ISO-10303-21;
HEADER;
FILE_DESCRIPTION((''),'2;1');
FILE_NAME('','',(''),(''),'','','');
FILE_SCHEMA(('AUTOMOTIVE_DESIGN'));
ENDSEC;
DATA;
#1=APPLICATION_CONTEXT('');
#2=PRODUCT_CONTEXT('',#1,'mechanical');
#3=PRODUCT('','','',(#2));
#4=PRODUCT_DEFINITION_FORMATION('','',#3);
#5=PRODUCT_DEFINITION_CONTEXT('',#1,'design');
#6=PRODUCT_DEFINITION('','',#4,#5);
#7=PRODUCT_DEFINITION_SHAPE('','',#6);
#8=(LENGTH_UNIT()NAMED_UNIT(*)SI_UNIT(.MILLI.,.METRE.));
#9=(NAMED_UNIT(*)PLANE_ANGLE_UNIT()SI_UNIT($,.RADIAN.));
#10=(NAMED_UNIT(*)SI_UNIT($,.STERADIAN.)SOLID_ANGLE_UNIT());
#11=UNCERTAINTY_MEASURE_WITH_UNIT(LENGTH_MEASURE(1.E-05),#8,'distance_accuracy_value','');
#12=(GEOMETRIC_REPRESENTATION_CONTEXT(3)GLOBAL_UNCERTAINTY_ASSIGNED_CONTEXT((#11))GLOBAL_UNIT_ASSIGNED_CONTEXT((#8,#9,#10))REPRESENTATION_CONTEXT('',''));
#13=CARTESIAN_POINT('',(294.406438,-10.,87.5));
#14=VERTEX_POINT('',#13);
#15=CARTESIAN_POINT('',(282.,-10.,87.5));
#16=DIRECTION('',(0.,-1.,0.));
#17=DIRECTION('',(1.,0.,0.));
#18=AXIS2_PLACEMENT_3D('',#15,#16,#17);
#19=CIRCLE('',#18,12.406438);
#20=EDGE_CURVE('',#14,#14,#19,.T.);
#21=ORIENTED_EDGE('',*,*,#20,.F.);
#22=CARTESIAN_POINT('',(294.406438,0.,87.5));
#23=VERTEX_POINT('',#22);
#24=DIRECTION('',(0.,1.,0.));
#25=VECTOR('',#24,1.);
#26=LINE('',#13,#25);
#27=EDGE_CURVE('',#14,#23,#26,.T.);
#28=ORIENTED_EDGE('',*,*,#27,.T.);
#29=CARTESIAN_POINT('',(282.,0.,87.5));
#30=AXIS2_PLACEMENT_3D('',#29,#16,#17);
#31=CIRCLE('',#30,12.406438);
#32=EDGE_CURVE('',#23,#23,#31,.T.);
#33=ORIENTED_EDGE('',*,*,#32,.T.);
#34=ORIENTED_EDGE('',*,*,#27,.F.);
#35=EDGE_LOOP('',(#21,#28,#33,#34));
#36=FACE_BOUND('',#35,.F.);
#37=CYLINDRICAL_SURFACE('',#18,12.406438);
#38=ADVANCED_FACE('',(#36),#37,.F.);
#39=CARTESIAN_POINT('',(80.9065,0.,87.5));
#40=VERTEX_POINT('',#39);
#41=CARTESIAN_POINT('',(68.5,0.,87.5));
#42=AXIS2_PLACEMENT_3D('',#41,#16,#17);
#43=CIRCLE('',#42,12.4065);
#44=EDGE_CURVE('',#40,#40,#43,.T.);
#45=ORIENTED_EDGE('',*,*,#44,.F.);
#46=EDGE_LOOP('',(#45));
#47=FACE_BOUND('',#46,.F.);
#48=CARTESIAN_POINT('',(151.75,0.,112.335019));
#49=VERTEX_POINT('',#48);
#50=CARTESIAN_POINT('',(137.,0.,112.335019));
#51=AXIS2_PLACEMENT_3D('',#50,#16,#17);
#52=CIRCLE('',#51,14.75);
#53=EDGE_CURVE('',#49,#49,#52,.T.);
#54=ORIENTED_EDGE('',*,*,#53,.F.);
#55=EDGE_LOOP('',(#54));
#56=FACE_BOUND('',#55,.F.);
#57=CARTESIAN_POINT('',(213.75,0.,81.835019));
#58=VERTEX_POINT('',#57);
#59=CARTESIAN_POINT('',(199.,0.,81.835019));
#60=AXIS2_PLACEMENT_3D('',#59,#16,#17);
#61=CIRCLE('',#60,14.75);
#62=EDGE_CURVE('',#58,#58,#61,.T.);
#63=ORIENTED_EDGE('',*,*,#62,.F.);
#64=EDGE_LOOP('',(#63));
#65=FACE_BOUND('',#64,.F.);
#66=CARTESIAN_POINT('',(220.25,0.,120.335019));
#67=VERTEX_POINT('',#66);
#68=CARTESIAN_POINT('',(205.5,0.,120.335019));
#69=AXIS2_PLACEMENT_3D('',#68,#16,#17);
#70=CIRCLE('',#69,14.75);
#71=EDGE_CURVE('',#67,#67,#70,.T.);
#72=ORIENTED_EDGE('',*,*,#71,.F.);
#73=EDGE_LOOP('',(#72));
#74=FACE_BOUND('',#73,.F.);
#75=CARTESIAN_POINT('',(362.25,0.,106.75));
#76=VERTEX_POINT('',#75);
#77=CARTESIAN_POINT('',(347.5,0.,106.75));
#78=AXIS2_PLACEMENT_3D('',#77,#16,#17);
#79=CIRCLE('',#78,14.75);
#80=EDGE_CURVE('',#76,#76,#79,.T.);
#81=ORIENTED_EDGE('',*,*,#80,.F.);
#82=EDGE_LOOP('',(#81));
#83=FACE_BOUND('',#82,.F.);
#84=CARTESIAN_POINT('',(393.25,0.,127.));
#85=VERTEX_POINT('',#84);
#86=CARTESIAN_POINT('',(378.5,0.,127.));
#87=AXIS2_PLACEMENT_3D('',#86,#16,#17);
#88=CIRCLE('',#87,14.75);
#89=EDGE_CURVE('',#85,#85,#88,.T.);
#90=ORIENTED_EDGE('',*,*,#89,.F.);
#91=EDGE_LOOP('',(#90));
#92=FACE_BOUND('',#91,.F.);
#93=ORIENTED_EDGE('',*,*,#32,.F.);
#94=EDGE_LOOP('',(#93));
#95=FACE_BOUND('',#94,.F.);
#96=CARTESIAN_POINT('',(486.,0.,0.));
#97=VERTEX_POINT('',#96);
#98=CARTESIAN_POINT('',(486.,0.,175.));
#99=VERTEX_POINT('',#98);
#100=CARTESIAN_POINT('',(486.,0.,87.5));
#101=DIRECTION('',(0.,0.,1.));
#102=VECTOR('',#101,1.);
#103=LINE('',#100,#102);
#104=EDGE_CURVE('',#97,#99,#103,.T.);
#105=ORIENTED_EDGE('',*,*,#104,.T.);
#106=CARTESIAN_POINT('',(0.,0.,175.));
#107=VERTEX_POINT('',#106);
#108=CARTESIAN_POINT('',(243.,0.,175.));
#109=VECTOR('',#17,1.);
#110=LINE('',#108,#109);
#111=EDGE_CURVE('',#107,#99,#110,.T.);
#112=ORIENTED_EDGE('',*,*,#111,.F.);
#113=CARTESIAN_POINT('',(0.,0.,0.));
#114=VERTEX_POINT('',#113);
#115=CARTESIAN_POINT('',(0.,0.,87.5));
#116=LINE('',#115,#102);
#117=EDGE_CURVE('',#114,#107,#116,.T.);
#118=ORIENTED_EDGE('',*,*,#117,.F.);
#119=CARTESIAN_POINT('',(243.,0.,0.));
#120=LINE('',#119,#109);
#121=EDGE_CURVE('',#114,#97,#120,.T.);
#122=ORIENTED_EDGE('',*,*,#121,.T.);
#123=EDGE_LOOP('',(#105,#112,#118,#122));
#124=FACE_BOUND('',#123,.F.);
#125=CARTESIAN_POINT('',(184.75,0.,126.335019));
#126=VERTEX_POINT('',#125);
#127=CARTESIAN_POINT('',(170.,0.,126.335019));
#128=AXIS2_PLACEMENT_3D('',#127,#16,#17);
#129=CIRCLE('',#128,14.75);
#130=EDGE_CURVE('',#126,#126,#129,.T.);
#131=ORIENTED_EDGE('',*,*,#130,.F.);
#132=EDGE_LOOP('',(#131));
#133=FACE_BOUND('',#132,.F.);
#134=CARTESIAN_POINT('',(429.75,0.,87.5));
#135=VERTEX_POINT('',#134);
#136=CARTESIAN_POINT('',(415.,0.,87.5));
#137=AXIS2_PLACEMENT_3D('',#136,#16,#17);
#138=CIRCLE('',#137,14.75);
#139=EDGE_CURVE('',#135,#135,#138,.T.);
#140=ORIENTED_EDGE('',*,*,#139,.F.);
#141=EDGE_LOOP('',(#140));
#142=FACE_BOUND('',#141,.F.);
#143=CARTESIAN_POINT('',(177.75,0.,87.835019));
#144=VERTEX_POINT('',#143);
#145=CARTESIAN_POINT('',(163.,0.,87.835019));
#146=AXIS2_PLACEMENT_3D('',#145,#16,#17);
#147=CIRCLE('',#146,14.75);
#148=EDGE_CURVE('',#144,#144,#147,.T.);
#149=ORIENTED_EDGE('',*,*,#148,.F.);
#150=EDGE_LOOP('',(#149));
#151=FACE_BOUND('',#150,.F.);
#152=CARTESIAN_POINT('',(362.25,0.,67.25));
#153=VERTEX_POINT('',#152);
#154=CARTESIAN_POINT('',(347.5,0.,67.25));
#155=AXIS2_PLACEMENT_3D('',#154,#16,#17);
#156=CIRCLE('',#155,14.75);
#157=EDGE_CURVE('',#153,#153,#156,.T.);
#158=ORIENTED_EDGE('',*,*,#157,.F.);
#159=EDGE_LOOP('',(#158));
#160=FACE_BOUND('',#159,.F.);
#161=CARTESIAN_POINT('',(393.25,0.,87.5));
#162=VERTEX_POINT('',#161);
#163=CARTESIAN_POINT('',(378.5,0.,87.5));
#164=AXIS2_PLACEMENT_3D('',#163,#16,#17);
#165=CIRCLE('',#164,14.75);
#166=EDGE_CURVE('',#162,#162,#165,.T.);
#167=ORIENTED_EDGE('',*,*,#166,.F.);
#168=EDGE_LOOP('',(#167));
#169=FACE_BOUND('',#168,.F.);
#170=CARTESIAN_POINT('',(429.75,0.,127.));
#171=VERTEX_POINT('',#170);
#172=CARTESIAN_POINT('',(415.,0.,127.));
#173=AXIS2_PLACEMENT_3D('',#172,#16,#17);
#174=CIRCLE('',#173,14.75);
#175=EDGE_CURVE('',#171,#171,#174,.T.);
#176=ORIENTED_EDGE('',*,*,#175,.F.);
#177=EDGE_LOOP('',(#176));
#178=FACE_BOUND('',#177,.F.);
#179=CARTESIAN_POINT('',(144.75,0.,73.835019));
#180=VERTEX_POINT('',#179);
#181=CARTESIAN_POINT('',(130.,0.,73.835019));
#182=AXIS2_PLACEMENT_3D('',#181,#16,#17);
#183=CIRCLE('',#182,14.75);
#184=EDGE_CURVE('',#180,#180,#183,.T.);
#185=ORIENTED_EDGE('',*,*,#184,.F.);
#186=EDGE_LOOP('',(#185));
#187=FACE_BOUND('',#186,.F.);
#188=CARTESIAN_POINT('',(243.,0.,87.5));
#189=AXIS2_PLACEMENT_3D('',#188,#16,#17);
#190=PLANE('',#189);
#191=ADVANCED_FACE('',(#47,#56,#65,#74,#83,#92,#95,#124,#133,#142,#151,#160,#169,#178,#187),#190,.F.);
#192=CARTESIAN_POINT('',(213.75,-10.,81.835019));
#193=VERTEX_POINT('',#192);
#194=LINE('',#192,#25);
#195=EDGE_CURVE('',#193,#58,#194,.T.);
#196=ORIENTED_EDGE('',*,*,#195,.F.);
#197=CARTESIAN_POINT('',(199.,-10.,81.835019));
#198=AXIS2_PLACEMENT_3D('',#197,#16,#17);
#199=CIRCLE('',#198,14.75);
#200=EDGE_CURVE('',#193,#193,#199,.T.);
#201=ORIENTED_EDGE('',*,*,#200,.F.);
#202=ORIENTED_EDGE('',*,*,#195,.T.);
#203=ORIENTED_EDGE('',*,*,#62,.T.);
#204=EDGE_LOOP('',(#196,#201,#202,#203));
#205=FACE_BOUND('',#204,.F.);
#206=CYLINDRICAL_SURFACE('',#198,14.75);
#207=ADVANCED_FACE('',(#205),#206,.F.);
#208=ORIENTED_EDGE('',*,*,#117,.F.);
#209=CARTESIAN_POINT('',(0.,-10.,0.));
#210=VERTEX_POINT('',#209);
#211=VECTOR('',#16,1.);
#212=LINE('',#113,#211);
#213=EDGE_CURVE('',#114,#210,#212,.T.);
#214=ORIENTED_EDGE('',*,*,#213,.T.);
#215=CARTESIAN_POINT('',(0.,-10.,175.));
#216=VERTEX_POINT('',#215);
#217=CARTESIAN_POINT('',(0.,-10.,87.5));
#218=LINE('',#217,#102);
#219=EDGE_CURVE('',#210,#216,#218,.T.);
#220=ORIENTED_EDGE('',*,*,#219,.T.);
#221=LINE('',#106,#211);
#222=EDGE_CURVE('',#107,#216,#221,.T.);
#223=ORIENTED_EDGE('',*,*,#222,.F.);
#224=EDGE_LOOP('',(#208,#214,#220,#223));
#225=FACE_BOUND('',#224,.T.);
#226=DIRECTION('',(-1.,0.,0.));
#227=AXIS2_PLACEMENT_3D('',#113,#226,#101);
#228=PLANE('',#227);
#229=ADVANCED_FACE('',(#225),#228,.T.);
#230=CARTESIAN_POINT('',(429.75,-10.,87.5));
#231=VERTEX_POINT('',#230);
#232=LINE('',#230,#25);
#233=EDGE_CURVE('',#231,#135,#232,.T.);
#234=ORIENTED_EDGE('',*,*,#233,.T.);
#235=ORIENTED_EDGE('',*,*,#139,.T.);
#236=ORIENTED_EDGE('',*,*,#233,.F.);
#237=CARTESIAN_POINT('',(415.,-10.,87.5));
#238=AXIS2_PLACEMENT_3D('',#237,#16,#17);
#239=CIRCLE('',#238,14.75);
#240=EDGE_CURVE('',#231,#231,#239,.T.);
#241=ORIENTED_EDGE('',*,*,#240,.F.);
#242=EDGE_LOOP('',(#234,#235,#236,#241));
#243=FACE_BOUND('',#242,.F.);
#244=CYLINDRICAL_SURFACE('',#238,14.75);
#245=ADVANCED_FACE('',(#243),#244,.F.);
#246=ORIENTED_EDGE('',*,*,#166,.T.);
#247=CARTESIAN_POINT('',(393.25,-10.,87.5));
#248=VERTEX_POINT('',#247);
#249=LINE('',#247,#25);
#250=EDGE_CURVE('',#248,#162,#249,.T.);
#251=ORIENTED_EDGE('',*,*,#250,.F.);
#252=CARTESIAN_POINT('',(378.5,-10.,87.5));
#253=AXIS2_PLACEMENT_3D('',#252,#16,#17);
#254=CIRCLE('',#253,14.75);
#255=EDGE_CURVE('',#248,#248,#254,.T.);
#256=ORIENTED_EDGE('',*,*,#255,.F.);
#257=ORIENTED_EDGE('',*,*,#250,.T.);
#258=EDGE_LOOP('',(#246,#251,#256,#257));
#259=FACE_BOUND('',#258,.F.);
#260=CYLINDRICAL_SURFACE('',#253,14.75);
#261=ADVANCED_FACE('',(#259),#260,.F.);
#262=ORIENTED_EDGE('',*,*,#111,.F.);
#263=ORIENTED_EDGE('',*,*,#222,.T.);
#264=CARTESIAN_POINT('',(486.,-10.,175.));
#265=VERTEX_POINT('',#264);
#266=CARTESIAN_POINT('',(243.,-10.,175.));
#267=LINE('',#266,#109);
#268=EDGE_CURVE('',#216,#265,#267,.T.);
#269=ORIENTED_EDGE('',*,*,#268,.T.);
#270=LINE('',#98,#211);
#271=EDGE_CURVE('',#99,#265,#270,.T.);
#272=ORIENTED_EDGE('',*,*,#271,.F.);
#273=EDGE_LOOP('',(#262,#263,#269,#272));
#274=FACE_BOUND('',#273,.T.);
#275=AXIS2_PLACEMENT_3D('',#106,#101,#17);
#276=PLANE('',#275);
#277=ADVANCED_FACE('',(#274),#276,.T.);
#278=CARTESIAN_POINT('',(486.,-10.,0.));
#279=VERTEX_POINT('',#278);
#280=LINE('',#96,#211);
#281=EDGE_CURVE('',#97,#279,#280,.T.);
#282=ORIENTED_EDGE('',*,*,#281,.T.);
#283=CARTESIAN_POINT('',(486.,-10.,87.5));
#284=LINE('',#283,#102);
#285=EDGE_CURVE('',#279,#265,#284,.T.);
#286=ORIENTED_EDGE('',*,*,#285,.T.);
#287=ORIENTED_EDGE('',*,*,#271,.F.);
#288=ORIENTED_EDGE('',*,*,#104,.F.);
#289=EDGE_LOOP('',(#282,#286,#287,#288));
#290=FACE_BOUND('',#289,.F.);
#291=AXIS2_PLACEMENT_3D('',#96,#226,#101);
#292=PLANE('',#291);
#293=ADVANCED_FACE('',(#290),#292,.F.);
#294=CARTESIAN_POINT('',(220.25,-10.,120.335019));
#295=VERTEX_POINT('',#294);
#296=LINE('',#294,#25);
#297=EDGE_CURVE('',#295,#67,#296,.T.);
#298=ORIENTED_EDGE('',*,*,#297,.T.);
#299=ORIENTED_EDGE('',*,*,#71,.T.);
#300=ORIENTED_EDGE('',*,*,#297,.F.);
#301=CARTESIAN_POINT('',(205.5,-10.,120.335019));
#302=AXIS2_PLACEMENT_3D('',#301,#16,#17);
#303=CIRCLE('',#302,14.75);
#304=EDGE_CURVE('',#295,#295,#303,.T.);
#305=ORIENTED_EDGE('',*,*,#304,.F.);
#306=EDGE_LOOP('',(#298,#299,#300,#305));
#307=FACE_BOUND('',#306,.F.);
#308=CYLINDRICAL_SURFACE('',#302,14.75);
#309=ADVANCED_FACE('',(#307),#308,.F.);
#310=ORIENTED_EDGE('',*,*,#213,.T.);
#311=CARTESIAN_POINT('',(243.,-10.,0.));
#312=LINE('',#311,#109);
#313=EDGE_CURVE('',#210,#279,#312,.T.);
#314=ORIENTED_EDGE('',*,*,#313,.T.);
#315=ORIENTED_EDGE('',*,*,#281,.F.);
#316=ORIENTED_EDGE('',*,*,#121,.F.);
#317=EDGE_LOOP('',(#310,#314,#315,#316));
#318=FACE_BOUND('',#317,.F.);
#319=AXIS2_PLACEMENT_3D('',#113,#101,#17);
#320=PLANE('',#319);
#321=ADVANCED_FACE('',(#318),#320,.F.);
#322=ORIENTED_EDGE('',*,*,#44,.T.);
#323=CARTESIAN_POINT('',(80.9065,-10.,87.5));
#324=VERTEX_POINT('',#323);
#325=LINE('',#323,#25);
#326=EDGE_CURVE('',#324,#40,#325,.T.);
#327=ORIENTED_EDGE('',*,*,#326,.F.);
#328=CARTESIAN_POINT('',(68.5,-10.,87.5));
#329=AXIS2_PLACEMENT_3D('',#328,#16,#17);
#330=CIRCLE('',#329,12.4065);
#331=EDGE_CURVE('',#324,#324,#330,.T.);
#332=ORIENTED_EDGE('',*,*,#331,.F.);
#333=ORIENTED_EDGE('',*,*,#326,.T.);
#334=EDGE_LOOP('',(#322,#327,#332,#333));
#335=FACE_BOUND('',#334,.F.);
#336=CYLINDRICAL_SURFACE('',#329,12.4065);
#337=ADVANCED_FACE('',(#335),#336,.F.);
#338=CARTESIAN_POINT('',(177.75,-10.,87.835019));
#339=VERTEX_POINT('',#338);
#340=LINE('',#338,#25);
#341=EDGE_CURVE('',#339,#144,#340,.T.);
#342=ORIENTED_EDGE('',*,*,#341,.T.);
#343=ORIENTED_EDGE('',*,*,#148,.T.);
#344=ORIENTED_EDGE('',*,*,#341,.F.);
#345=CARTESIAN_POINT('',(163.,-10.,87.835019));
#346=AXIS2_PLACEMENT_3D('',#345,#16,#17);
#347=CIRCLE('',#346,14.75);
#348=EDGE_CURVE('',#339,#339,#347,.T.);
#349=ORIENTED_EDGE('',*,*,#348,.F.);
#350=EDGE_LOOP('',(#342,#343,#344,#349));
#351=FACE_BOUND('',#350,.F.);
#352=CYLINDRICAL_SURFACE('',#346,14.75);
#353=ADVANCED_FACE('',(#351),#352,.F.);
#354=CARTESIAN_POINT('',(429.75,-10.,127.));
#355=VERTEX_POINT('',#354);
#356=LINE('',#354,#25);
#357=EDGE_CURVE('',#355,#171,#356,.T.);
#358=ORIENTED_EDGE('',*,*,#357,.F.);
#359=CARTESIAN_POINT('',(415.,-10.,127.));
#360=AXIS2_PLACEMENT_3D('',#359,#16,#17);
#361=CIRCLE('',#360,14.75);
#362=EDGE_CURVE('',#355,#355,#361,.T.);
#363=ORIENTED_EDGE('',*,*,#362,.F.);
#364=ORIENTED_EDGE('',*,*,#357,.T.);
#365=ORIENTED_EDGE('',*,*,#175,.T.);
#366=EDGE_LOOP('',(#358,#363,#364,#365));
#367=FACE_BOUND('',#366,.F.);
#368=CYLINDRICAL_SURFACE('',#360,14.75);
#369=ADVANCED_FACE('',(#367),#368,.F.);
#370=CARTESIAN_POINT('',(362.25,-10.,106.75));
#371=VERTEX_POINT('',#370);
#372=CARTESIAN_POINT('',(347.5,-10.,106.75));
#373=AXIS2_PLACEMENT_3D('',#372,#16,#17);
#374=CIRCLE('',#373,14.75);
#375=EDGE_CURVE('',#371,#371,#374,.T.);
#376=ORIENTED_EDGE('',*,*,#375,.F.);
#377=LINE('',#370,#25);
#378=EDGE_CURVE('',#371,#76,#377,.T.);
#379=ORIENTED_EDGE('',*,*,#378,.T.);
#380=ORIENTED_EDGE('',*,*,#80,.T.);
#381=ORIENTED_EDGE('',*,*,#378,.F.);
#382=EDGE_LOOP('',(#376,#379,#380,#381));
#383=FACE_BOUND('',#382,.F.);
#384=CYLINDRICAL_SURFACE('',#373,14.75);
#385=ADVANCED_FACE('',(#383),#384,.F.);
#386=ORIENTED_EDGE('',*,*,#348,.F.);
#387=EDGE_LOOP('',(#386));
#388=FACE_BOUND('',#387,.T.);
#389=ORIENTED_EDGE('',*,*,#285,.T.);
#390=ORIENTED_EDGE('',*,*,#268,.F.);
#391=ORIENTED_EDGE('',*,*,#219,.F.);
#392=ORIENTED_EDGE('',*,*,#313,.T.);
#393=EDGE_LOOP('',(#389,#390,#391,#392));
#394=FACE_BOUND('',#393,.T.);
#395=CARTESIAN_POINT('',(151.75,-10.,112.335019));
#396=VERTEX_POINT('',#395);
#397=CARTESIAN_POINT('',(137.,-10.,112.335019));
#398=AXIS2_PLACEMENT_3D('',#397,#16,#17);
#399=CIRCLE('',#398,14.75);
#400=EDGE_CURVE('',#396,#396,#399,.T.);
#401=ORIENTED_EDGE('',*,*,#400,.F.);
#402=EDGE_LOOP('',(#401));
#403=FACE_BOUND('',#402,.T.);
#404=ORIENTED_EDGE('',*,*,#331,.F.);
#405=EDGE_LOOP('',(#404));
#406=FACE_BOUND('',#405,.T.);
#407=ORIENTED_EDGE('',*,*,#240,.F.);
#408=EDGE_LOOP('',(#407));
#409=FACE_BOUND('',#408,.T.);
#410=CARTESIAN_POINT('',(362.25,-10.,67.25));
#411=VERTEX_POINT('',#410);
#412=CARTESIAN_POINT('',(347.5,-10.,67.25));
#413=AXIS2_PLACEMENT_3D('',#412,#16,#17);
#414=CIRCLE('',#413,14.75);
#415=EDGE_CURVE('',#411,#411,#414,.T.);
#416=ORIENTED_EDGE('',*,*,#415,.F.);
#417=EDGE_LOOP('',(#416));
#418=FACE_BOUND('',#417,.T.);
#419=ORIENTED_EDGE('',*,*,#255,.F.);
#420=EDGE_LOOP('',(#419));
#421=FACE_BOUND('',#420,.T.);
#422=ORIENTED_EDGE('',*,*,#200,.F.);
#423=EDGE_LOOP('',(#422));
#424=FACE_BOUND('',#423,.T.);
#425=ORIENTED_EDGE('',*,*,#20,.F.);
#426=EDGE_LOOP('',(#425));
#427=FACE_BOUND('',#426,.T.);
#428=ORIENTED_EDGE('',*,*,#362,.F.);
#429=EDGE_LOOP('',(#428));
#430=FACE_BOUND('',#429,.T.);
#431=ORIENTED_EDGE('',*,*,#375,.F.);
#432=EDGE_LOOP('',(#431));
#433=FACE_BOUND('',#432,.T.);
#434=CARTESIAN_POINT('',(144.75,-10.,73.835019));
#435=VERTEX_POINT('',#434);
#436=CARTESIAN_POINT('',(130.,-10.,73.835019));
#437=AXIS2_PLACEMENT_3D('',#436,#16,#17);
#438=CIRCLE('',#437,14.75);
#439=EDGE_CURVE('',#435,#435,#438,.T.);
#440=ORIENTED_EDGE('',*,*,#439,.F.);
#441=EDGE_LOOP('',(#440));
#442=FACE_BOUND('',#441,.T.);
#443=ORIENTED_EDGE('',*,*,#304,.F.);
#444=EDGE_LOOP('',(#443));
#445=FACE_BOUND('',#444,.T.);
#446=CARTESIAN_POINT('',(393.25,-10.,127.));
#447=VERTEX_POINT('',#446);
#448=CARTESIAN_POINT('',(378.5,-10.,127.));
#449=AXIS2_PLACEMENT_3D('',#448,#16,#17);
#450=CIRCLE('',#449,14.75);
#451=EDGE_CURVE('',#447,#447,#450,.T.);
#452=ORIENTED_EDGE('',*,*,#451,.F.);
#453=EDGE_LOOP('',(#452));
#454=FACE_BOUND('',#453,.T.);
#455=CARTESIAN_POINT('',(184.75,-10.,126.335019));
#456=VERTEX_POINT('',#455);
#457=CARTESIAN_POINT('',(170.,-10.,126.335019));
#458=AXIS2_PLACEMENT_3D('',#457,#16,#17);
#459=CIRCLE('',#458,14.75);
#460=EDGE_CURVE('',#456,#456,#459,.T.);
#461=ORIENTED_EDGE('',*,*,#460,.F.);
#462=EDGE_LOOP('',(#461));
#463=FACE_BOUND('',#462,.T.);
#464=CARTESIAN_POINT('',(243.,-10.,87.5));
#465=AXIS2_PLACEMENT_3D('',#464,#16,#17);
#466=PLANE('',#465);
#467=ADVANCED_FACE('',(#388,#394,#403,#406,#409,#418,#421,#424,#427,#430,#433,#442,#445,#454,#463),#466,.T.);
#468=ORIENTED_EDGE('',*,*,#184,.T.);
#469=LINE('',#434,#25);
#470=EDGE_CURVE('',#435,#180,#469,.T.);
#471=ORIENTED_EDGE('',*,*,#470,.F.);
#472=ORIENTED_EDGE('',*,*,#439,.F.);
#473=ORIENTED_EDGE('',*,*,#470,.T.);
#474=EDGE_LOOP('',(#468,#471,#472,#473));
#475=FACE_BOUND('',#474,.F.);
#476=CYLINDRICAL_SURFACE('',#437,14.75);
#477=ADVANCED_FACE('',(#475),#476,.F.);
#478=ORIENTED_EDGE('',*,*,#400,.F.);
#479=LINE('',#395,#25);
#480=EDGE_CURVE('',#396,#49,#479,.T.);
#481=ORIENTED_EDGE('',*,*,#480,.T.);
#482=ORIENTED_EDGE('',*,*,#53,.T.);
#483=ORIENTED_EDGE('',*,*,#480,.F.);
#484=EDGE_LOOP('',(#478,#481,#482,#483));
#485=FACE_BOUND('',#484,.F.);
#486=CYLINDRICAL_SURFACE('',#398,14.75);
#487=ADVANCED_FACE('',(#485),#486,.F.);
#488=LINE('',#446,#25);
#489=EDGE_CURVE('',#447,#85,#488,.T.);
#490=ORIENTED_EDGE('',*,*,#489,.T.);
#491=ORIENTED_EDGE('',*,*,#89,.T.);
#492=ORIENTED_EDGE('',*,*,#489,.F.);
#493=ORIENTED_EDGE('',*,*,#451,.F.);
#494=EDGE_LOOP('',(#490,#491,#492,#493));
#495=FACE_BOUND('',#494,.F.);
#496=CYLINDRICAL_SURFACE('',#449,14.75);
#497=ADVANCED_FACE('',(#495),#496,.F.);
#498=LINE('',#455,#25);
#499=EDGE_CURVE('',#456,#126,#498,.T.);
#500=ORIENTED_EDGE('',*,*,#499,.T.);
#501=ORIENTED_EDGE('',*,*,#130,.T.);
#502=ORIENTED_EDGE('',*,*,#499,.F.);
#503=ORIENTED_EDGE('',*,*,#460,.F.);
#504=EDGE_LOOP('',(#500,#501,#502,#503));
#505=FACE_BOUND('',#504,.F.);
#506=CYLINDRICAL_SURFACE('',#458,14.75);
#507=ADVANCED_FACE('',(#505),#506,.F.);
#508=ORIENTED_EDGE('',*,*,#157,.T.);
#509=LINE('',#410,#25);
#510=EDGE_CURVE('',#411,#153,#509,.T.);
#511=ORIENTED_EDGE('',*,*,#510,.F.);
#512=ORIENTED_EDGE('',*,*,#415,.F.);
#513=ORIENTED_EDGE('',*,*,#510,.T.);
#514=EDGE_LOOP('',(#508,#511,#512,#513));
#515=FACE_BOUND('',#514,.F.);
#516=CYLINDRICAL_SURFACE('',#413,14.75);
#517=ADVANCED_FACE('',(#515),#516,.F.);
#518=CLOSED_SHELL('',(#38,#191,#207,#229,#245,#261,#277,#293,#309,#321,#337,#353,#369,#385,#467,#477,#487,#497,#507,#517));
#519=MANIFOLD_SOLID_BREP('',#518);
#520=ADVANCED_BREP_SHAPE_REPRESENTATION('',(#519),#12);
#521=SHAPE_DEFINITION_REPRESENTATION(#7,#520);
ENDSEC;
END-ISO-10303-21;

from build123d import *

# Parameters (mm, degrees)
F0_W     = 486
F0_H     = 175
F1_DEPTH = 10
F5_R     = 14.75
F5_R_2   = 12.4064380464
F7_DEPTH = 25
F3_R     = 14.75
F3_R_2   = 12.4065
F8_DEPTH = 25


# Not quite as in the source:
# - a feature names something its author has since deleted; it is built from what else it names


with BuildPart() as f1:
    # F0 (on Front) → F1 (new body)
    with BuildSketch(Plane.XZ):
        with Locations((243, 87.5)):
            Rectangle(F0_W, F0_H)
    extrude(amount=F1_DEPTH)

    # F5 (on face) → F7 (cut)
    with BuildSketch(Plane.XZ.offset(10)):
        with Locations((347.5, 106.75)):
            Circle(F5_R)
        with Locations((378.5, 127)):
            Circle(F5_R)
        with Locations((415, 127)):
            Circle(F5_R)
        with Locations((415, 87.5)):
            Circle(F5_R)
        with Locations((378.5, 87.5)):
            Circle(F5_R)
        with Locations((347.5, 67.25)):
            Circle(F5_R)
        with Locations((282, 87.5)):
            Circle(F5_R_2)
    extrude(amount=-F7_DEPTH, mode=Mode.SUBTRACT)

    # F3 (on face) → F8 (cut)
    with BuildSketch(Plane.XZ.offset(10)):
        with Locations((170, 126.3350188136)):
            Circle(F3_R)
        with Locations((205.5, 120.3350188136)):
            Circle(F3_R)
        with Locations((199, 81.8350188136)):
            Circle(F3_R)
        with Locations((163, 87.8350188136)):
            Circle(F3_R)
        with Locations((130, 73.8350188136)):
            Circle(F3_R)
        with Locations((137, 112.3350188136)):
            Circle(F3_R)
        with Locations((68.5, 87.5)):
            Circle(F3_R_2)
    extrude(amount=-F8_DEPTH, mode=Mode.SUBTRACT)


solid = f1.part
